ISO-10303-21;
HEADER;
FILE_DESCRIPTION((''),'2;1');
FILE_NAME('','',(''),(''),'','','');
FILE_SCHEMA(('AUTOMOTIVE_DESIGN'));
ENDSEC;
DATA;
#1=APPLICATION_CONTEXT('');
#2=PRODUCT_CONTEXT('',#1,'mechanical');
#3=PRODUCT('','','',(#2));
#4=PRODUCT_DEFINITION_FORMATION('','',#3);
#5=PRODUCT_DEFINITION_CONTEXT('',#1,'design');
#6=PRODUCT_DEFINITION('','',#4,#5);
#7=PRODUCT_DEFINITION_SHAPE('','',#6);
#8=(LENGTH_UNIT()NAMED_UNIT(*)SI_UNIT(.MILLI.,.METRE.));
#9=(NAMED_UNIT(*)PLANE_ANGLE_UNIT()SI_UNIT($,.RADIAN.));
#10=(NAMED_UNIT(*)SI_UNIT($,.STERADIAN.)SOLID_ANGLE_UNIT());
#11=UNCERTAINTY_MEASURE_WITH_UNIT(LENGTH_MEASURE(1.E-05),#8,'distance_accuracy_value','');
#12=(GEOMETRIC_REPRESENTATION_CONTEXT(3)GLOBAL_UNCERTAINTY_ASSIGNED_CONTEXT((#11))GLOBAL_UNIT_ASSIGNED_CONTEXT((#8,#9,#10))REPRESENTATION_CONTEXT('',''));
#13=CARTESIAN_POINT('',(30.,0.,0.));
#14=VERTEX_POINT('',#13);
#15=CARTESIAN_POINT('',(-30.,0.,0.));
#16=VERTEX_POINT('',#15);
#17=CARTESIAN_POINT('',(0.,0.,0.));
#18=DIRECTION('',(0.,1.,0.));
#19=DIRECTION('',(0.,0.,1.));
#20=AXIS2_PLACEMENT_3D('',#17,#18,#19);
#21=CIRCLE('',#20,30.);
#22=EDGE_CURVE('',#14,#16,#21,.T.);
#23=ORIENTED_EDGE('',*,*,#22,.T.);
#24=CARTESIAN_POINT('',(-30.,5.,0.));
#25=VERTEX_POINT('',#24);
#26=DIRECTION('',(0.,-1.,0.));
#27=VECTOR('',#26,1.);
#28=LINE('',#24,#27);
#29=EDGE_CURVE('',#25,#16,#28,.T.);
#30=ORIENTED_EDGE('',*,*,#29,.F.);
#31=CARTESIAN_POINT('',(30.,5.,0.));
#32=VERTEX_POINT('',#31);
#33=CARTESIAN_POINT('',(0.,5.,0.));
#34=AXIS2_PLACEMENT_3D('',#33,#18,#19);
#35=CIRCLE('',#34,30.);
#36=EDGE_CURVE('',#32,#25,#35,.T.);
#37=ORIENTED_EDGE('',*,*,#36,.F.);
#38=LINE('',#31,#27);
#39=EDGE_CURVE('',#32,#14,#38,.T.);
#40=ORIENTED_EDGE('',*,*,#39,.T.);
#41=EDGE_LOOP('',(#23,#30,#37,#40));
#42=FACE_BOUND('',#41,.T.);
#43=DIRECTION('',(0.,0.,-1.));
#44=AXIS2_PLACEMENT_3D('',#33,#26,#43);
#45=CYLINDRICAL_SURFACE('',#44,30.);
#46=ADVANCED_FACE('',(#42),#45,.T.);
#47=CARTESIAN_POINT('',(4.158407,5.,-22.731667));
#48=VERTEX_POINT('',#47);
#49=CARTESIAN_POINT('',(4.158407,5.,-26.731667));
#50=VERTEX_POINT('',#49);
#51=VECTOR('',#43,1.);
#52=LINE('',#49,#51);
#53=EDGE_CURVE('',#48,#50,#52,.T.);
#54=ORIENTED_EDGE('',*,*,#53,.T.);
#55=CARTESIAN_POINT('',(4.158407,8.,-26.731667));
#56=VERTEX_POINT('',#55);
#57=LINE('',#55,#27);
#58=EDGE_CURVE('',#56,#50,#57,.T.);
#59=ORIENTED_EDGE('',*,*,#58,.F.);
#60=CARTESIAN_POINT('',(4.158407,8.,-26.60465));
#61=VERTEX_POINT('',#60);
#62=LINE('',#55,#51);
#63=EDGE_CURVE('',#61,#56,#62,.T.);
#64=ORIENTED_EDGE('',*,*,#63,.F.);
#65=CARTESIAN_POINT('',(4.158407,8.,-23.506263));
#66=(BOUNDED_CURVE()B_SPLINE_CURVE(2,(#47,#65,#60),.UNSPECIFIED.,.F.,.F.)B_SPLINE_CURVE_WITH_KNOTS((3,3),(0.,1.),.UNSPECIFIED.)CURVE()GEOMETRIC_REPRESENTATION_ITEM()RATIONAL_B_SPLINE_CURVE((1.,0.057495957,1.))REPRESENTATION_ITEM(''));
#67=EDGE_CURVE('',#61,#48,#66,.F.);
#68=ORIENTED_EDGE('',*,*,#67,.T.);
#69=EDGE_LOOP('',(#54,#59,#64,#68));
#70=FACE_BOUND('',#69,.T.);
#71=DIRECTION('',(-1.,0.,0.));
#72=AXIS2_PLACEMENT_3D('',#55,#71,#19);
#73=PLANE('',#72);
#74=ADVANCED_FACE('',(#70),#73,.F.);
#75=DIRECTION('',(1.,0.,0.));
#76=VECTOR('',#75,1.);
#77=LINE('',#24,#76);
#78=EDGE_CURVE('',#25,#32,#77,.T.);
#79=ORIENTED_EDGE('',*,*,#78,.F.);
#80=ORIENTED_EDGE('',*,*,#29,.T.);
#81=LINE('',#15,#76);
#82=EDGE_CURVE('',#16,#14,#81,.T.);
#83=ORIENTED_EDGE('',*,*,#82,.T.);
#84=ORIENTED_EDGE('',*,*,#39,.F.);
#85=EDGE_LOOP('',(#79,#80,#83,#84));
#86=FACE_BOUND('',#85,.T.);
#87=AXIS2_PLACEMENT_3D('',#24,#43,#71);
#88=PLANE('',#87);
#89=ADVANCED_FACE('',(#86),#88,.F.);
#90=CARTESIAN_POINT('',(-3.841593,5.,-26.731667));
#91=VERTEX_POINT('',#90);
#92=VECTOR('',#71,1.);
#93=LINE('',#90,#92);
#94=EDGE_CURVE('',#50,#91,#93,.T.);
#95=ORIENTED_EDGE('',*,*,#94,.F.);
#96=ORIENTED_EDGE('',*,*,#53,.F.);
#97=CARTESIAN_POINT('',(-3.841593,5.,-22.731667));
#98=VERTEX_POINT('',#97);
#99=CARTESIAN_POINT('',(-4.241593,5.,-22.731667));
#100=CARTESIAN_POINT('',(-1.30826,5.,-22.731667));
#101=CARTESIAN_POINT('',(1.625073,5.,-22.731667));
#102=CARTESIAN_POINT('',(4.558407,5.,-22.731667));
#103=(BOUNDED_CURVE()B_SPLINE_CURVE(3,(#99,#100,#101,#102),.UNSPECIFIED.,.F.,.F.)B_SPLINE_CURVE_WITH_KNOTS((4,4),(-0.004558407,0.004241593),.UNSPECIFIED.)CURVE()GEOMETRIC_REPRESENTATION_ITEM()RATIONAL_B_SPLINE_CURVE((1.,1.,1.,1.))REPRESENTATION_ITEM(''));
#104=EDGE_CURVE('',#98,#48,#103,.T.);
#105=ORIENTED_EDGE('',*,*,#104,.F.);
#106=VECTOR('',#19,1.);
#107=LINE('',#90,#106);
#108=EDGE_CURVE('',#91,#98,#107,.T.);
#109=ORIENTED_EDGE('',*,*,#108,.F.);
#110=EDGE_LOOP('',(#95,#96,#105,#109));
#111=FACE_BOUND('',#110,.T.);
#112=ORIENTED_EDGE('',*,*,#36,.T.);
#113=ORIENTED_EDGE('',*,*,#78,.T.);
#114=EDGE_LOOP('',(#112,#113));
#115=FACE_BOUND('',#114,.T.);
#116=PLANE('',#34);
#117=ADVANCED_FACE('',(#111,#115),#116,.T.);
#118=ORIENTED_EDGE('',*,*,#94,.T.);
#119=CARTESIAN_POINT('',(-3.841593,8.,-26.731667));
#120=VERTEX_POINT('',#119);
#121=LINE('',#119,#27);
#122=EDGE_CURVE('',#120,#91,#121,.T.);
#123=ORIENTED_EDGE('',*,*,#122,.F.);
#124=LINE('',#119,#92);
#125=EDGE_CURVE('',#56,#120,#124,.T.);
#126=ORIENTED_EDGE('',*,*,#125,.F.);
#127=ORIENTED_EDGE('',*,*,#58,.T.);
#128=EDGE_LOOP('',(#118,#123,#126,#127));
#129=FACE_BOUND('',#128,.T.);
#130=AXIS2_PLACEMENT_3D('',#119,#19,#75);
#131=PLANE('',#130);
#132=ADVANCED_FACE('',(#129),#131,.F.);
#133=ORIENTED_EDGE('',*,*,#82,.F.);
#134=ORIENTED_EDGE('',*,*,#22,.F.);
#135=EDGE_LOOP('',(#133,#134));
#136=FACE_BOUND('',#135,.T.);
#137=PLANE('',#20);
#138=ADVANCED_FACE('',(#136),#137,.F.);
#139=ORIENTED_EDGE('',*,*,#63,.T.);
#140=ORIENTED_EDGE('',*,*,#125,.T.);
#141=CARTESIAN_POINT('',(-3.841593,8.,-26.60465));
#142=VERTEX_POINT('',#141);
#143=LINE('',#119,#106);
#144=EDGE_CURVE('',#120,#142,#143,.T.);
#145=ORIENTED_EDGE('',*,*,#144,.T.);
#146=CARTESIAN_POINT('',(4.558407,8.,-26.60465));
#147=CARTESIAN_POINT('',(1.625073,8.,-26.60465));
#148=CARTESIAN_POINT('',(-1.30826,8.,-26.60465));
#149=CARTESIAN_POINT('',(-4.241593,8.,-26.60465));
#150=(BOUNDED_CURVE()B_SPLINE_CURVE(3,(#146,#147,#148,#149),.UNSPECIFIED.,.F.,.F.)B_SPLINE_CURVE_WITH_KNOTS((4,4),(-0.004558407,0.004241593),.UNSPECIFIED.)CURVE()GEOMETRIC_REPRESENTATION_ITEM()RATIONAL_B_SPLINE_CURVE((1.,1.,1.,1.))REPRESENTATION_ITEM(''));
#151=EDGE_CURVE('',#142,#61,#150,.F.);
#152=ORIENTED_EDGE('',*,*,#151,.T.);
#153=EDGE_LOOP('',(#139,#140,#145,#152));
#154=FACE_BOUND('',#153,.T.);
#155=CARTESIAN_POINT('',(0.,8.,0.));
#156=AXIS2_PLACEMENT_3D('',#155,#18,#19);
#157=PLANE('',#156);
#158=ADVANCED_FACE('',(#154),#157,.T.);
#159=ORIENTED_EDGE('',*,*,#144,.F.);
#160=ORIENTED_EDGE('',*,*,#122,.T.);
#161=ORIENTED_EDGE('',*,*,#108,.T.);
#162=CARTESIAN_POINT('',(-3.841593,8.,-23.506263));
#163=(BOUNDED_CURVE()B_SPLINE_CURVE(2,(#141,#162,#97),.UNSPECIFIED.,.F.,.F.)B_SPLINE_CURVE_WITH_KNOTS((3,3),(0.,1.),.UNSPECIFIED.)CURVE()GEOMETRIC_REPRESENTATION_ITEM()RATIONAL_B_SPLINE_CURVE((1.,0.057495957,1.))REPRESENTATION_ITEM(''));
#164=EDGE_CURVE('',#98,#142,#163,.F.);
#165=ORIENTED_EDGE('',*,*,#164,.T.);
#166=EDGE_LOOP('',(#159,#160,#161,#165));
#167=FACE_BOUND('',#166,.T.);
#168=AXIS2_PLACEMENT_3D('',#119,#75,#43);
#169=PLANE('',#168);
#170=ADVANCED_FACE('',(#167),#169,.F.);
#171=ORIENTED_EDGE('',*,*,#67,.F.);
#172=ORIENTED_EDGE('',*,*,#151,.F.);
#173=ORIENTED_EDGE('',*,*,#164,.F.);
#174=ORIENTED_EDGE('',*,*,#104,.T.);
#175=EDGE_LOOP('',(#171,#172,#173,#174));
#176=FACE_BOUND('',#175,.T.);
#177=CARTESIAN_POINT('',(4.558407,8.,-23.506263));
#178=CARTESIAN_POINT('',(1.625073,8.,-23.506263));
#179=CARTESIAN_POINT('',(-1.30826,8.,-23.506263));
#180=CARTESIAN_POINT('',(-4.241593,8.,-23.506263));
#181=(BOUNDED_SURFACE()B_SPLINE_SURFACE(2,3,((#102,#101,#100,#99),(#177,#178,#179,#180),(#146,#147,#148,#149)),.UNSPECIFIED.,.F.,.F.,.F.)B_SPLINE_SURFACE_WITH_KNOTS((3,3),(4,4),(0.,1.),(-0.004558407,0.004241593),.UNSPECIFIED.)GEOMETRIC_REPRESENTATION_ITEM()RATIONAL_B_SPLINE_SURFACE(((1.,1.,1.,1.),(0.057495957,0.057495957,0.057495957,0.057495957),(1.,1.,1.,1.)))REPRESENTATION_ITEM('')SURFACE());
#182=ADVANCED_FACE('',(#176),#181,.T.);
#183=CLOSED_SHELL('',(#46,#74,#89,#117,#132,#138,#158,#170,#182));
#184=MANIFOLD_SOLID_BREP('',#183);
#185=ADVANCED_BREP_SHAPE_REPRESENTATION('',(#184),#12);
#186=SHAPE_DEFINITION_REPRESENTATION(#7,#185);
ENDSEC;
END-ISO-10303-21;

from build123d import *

# Parameters (mm, degrees)
BOSS_EXTRUDE1_DEPTH = 5
SKETCH3_W           = 8
SKETCH3_H           = 4
BOSS_EXTRUDE2_DEPTH = 3
FILLET1_START       = -3.841593316
FILLET1_DEPTH       = 8


with BuildPart() as part:
    # Sketch1 → Boss-Extrude1 (new body)
    with BuildSketch(Plane(origin=(0, 0, 0), x_dir=(1, 0, 0), z_dir=(0, 1, 0))):
        with BuildLine():
            Line((-30, 0), (30, 0))
            ThreePointArc((30, 0), (0, 30), (-30, 0))
        make_face()
    extrude(amount=BOSS_EXTRUDE1_DEPTH)

    # Sketch3 → Boss-Extrude2 (add)
    with BuildSketch(Plane(origin=(0, 5, 0), x_dir=(1, 0, 0), z_dir=(0, 1, 0))):
        with Locations((0.158406684, 24.731666579)):
            Rectangle(SKETCH3_W, SKETCH3_H)
    extrude(amount=BOSS_EXTRUDE2_DEPTH)

    # Fillet1: read off the stored shape, not the designer's step
    # Fillet1 outline → Fillet1 (cut)
    with BuildSketch(Plane.YZ.offset(FILLET1_START)):
        with BuildLine():
            Line((8, -22.731666579), (5, -22.731666579))
            add(Edge.make_bspline(
                [(5, -22.731666579), (8, -23.506263249), (8, -26.604649926)],
                knots=[0, 0, 0, 1, 1, 1], degree=2, weights=[1, 0.057495957, 1]))
            Line((8, -26.604649926), (8, -22.731666579))
        make_face()
    extrude(amount=FILLET1_DEPTH, mode=Mode.SUBTRACT)


solid = part.part
